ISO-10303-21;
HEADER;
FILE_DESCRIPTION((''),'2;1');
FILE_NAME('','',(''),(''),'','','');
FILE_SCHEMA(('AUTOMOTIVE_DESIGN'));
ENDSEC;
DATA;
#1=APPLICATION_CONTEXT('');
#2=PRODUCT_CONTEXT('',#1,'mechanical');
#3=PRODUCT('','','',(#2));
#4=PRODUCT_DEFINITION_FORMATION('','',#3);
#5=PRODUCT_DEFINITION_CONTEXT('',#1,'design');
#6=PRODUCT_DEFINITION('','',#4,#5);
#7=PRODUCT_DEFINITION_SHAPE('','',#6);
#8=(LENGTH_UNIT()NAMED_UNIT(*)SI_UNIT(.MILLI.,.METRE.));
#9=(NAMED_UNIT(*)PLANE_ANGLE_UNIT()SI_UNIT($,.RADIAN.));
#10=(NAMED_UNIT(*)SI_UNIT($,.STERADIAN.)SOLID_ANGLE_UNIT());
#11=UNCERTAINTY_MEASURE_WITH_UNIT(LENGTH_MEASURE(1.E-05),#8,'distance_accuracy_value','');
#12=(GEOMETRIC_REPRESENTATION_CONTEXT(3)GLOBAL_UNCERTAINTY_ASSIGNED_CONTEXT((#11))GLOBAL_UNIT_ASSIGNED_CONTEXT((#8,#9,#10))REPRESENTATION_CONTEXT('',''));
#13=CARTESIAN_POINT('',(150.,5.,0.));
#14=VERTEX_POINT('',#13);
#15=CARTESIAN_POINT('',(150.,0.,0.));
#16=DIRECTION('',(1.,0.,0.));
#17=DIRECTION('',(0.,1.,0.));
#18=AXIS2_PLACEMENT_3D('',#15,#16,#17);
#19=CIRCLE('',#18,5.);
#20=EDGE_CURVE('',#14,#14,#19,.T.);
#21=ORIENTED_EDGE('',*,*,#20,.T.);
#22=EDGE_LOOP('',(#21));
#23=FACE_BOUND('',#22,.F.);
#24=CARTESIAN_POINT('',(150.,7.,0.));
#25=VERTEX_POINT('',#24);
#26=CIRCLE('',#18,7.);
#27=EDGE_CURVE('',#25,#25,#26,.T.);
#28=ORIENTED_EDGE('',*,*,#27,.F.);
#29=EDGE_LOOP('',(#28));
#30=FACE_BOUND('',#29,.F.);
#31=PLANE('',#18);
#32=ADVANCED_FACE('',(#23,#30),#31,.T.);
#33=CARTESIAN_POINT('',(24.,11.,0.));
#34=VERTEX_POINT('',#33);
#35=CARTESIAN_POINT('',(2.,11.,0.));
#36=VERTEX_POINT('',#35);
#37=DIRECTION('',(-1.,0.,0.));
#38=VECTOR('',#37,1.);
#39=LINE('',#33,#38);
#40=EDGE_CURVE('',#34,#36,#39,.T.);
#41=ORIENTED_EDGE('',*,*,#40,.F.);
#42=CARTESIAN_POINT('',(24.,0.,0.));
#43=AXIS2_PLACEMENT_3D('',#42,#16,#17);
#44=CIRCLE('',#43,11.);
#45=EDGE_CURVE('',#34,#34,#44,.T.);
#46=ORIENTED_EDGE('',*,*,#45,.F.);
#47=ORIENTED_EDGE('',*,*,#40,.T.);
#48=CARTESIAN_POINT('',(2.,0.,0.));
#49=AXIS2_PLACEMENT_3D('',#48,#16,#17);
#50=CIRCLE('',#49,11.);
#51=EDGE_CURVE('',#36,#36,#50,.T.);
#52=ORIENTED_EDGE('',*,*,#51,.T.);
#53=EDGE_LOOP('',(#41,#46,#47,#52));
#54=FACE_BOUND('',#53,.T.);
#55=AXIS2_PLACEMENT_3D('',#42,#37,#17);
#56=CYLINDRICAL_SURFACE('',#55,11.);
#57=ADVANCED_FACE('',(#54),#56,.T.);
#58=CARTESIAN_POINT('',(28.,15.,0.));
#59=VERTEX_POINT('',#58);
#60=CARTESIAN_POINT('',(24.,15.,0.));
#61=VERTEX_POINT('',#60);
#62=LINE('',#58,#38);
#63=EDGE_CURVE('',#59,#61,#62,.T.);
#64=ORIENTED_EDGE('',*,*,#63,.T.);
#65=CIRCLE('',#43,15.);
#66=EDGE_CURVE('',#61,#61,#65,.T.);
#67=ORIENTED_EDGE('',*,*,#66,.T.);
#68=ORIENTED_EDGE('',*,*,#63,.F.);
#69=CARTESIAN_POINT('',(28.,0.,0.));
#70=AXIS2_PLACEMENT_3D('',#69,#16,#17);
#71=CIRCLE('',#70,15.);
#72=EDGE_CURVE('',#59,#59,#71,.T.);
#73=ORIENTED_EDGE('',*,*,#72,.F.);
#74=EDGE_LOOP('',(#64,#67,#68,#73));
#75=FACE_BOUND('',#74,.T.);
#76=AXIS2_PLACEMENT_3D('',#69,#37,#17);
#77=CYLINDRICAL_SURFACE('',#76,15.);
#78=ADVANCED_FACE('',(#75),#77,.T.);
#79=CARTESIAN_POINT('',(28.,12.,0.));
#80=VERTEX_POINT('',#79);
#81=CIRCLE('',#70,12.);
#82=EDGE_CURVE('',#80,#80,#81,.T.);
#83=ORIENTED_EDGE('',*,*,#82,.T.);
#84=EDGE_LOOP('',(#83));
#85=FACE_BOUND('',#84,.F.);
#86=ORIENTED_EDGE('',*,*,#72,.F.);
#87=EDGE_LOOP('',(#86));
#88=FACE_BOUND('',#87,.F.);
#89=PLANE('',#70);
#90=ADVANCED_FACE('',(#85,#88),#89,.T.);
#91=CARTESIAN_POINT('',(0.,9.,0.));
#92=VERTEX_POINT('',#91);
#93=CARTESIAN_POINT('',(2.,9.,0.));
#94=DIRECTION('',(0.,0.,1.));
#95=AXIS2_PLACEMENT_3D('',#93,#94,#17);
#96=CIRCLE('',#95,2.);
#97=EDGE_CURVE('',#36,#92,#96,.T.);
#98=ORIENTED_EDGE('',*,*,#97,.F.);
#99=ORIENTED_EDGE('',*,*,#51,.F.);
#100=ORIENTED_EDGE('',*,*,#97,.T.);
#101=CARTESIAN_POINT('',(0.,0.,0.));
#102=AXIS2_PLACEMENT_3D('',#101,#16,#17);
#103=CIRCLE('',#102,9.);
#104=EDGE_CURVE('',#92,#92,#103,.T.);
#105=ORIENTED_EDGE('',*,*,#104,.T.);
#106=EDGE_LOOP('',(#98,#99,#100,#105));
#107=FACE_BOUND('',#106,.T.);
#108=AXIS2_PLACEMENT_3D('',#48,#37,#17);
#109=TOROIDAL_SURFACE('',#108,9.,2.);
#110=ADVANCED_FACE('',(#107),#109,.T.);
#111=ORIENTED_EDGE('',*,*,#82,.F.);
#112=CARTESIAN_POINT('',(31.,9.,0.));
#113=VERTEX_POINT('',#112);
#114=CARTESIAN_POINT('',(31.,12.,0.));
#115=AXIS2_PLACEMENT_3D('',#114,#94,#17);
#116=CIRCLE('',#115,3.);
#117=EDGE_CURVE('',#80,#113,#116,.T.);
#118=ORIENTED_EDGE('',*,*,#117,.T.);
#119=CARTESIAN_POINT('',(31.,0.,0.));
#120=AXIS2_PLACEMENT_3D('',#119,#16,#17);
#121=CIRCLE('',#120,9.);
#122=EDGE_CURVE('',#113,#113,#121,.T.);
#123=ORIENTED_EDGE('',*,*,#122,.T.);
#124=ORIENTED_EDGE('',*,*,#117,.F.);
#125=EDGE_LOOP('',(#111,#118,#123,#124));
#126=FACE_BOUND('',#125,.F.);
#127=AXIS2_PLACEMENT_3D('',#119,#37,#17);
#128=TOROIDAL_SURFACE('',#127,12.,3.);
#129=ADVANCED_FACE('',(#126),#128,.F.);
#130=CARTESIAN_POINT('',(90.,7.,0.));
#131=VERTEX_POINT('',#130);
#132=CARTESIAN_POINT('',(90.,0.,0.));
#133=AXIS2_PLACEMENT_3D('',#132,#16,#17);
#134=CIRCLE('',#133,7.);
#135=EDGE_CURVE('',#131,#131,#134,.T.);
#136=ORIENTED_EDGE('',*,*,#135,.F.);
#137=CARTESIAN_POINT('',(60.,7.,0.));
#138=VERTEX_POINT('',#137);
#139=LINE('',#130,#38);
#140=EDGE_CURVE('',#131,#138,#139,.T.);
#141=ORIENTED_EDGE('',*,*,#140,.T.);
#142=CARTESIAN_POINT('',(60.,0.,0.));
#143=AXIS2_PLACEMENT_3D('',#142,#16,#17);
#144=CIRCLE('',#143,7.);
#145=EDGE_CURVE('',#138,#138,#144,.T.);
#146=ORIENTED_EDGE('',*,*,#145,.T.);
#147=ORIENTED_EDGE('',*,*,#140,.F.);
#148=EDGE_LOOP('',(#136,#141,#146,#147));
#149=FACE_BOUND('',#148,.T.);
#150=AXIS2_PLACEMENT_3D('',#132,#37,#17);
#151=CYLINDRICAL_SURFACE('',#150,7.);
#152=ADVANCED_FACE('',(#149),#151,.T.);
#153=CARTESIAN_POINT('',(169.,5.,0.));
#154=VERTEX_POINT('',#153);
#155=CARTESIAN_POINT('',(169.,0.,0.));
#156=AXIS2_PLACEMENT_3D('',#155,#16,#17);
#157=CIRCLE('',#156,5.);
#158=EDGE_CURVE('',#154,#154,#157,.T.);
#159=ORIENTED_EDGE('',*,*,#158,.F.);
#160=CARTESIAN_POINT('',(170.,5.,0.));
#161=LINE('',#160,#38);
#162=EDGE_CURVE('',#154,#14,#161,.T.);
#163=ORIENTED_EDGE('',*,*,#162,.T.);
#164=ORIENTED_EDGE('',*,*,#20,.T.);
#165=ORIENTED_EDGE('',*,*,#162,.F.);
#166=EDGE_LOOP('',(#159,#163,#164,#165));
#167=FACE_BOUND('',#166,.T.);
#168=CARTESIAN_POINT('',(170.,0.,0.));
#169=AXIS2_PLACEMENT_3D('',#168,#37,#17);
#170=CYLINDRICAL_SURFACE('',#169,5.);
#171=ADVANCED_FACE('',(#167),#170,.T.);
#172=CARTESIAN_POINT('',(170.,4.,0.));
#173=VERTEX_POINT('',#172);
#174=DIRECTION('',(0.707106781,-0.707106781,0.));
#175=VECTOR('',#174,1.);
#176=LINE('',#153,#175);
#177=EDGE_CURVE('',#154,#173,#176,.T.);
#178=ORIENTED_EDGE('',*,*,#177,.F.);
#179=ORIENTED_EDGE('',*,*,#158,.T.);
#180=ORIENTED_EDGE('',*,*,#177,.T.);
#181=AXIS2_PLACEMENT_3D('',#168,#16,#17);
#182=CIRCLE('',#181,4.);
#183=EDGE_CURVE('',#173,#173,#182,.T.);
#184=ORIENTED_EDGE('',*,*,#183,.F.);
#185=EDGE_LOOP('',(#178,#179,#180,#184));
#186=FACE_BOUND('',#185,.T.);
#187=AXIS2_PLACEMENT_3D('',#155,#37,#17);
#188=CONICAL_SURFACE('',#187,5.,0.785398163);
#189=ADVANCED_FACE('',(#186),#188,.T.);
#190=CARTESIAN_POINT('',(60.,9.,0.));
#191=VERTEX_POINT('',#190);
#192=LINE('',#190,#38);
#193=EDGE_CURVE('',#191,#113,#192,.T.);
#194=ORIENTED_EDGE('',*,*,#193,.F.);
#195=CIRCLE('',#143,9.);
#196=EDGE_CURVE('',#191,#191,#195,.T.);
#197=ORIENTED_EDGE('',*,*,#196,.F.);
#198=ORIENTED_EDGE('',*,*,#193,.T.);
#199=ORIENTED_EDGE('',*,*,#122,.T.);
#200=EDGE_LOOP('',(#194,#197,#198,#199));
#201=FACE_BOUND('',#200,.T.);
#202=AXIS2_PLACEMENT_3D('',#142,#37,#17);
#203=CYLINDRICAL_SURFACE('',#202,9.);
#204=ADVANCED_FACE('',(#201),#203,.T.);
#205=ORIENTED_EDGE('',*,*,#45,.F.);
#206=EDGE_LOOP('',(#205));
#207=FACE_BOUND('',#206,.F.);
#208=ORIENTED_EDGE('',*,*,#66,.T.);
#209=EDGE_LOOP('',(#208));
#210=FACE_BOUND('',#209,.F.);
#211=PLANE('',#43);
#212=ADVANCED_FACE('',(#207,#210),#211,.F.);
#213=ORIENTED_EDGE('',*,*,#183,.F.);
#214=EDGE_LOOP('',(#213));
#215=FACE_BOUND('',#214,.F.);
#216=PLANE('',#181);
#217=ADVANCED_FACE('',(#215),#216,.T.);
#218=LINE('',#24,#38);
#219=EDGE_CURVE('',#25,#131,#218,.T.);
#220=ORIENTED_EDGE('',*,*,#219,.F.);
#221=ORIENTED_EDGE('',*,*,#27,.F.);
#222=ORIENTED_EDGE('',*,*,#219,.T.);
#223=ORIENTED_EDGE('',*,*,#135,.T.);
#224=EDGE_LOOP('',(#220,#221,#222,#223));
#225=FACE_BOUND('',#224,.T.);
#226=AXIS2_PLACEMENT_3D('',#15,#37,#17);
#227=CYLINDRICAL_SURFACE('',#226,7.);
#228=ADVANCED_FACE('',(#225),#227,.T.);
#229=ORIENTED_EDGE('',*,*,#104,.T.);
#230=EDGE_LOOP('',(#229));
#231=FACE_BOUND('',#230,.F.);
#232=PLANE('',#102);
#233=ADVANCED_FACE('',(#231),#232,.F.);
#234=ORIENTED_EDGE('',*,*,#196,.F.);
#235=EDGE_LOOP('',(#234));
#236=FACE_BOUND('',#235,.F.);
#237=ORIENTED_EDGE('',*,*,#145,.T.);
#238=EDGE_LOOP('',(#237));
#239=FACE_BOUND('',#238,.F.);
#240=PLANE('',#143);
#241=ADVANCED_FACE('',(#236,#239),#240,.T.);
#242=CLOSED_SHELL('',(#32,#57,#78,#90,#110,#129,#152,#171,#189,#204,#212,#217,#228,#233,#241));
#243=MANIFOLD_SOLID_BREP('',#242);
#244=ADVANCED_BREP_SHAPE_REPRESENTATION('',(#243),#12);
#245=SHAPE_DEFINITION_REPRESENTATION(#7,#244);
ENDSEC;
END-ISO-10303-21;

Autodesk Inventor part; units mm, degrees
ref_plane "YZ Plane" through (0, 0, 0) normal (1, 0, 0) x (0, 1, 0)
ref_plane "XZ Plane" through (0, 0, 0) normal (0, 1, 0) x (-1, 0, 0)
ref_plane "XY Plane" through (0, 0, 0) normal (0, 0, 1) x (1, 0, 0)
sketch "Sketch1" plane through (0, 0, 0) normal (0, 0, 1) x (1, 0, 0)
  line L0 (0, 0) -> (170, 0)
  line L1 (170, 0) -> (170, 5)
  line L2 (170, 5) -> (150, 5)
  line L3 (150, 5) -> (150, 7)
  line L4 (150, 7) -> (90, 7)
  line L5 (90, 7) -> (60, 7)
  line L6 (60, 7) -> (60, 9)
  line L7 (60, 9) -> (28, 9)
  line L8 (28, 9) -> (28, 15)
  line L9 (28, 15) -> (24, 15)
  line L10 (24, 15) -> (24, 11)
  line L11 (24, 11) -> (0, 11)
  line L12 (0, 11) -> (0, 0)
  dimension "d0" = 170
  dimension "d1" = 10
  dimension "d2" = 14
  dimension "d3" = 18
  dimension "d4" = 30
  dimension "d5" = 22
  dimension "d6" = 24
  dimension "d7" = 4
  dimension "d8" = 32
  dimension "d9" = 60
  dimension "d10" = 30
revolve "Revolution1" add sketch "Sketch1" angle 360 about axis through (0, 0, 0) along (1, 0, 0)
thread "Thread1" size "M14x2" class "6g" standard "ANSI Metric M Profile" length 60
fillet "Fillet1" radius 3 1 edges at (28, -9, 0)
fillet "Fillet2" radius 2 1 edges at (0, -11, 0)
chamfer "Chamfer1" distance 1 angle 45 1 edges at (170, -5, 0)
